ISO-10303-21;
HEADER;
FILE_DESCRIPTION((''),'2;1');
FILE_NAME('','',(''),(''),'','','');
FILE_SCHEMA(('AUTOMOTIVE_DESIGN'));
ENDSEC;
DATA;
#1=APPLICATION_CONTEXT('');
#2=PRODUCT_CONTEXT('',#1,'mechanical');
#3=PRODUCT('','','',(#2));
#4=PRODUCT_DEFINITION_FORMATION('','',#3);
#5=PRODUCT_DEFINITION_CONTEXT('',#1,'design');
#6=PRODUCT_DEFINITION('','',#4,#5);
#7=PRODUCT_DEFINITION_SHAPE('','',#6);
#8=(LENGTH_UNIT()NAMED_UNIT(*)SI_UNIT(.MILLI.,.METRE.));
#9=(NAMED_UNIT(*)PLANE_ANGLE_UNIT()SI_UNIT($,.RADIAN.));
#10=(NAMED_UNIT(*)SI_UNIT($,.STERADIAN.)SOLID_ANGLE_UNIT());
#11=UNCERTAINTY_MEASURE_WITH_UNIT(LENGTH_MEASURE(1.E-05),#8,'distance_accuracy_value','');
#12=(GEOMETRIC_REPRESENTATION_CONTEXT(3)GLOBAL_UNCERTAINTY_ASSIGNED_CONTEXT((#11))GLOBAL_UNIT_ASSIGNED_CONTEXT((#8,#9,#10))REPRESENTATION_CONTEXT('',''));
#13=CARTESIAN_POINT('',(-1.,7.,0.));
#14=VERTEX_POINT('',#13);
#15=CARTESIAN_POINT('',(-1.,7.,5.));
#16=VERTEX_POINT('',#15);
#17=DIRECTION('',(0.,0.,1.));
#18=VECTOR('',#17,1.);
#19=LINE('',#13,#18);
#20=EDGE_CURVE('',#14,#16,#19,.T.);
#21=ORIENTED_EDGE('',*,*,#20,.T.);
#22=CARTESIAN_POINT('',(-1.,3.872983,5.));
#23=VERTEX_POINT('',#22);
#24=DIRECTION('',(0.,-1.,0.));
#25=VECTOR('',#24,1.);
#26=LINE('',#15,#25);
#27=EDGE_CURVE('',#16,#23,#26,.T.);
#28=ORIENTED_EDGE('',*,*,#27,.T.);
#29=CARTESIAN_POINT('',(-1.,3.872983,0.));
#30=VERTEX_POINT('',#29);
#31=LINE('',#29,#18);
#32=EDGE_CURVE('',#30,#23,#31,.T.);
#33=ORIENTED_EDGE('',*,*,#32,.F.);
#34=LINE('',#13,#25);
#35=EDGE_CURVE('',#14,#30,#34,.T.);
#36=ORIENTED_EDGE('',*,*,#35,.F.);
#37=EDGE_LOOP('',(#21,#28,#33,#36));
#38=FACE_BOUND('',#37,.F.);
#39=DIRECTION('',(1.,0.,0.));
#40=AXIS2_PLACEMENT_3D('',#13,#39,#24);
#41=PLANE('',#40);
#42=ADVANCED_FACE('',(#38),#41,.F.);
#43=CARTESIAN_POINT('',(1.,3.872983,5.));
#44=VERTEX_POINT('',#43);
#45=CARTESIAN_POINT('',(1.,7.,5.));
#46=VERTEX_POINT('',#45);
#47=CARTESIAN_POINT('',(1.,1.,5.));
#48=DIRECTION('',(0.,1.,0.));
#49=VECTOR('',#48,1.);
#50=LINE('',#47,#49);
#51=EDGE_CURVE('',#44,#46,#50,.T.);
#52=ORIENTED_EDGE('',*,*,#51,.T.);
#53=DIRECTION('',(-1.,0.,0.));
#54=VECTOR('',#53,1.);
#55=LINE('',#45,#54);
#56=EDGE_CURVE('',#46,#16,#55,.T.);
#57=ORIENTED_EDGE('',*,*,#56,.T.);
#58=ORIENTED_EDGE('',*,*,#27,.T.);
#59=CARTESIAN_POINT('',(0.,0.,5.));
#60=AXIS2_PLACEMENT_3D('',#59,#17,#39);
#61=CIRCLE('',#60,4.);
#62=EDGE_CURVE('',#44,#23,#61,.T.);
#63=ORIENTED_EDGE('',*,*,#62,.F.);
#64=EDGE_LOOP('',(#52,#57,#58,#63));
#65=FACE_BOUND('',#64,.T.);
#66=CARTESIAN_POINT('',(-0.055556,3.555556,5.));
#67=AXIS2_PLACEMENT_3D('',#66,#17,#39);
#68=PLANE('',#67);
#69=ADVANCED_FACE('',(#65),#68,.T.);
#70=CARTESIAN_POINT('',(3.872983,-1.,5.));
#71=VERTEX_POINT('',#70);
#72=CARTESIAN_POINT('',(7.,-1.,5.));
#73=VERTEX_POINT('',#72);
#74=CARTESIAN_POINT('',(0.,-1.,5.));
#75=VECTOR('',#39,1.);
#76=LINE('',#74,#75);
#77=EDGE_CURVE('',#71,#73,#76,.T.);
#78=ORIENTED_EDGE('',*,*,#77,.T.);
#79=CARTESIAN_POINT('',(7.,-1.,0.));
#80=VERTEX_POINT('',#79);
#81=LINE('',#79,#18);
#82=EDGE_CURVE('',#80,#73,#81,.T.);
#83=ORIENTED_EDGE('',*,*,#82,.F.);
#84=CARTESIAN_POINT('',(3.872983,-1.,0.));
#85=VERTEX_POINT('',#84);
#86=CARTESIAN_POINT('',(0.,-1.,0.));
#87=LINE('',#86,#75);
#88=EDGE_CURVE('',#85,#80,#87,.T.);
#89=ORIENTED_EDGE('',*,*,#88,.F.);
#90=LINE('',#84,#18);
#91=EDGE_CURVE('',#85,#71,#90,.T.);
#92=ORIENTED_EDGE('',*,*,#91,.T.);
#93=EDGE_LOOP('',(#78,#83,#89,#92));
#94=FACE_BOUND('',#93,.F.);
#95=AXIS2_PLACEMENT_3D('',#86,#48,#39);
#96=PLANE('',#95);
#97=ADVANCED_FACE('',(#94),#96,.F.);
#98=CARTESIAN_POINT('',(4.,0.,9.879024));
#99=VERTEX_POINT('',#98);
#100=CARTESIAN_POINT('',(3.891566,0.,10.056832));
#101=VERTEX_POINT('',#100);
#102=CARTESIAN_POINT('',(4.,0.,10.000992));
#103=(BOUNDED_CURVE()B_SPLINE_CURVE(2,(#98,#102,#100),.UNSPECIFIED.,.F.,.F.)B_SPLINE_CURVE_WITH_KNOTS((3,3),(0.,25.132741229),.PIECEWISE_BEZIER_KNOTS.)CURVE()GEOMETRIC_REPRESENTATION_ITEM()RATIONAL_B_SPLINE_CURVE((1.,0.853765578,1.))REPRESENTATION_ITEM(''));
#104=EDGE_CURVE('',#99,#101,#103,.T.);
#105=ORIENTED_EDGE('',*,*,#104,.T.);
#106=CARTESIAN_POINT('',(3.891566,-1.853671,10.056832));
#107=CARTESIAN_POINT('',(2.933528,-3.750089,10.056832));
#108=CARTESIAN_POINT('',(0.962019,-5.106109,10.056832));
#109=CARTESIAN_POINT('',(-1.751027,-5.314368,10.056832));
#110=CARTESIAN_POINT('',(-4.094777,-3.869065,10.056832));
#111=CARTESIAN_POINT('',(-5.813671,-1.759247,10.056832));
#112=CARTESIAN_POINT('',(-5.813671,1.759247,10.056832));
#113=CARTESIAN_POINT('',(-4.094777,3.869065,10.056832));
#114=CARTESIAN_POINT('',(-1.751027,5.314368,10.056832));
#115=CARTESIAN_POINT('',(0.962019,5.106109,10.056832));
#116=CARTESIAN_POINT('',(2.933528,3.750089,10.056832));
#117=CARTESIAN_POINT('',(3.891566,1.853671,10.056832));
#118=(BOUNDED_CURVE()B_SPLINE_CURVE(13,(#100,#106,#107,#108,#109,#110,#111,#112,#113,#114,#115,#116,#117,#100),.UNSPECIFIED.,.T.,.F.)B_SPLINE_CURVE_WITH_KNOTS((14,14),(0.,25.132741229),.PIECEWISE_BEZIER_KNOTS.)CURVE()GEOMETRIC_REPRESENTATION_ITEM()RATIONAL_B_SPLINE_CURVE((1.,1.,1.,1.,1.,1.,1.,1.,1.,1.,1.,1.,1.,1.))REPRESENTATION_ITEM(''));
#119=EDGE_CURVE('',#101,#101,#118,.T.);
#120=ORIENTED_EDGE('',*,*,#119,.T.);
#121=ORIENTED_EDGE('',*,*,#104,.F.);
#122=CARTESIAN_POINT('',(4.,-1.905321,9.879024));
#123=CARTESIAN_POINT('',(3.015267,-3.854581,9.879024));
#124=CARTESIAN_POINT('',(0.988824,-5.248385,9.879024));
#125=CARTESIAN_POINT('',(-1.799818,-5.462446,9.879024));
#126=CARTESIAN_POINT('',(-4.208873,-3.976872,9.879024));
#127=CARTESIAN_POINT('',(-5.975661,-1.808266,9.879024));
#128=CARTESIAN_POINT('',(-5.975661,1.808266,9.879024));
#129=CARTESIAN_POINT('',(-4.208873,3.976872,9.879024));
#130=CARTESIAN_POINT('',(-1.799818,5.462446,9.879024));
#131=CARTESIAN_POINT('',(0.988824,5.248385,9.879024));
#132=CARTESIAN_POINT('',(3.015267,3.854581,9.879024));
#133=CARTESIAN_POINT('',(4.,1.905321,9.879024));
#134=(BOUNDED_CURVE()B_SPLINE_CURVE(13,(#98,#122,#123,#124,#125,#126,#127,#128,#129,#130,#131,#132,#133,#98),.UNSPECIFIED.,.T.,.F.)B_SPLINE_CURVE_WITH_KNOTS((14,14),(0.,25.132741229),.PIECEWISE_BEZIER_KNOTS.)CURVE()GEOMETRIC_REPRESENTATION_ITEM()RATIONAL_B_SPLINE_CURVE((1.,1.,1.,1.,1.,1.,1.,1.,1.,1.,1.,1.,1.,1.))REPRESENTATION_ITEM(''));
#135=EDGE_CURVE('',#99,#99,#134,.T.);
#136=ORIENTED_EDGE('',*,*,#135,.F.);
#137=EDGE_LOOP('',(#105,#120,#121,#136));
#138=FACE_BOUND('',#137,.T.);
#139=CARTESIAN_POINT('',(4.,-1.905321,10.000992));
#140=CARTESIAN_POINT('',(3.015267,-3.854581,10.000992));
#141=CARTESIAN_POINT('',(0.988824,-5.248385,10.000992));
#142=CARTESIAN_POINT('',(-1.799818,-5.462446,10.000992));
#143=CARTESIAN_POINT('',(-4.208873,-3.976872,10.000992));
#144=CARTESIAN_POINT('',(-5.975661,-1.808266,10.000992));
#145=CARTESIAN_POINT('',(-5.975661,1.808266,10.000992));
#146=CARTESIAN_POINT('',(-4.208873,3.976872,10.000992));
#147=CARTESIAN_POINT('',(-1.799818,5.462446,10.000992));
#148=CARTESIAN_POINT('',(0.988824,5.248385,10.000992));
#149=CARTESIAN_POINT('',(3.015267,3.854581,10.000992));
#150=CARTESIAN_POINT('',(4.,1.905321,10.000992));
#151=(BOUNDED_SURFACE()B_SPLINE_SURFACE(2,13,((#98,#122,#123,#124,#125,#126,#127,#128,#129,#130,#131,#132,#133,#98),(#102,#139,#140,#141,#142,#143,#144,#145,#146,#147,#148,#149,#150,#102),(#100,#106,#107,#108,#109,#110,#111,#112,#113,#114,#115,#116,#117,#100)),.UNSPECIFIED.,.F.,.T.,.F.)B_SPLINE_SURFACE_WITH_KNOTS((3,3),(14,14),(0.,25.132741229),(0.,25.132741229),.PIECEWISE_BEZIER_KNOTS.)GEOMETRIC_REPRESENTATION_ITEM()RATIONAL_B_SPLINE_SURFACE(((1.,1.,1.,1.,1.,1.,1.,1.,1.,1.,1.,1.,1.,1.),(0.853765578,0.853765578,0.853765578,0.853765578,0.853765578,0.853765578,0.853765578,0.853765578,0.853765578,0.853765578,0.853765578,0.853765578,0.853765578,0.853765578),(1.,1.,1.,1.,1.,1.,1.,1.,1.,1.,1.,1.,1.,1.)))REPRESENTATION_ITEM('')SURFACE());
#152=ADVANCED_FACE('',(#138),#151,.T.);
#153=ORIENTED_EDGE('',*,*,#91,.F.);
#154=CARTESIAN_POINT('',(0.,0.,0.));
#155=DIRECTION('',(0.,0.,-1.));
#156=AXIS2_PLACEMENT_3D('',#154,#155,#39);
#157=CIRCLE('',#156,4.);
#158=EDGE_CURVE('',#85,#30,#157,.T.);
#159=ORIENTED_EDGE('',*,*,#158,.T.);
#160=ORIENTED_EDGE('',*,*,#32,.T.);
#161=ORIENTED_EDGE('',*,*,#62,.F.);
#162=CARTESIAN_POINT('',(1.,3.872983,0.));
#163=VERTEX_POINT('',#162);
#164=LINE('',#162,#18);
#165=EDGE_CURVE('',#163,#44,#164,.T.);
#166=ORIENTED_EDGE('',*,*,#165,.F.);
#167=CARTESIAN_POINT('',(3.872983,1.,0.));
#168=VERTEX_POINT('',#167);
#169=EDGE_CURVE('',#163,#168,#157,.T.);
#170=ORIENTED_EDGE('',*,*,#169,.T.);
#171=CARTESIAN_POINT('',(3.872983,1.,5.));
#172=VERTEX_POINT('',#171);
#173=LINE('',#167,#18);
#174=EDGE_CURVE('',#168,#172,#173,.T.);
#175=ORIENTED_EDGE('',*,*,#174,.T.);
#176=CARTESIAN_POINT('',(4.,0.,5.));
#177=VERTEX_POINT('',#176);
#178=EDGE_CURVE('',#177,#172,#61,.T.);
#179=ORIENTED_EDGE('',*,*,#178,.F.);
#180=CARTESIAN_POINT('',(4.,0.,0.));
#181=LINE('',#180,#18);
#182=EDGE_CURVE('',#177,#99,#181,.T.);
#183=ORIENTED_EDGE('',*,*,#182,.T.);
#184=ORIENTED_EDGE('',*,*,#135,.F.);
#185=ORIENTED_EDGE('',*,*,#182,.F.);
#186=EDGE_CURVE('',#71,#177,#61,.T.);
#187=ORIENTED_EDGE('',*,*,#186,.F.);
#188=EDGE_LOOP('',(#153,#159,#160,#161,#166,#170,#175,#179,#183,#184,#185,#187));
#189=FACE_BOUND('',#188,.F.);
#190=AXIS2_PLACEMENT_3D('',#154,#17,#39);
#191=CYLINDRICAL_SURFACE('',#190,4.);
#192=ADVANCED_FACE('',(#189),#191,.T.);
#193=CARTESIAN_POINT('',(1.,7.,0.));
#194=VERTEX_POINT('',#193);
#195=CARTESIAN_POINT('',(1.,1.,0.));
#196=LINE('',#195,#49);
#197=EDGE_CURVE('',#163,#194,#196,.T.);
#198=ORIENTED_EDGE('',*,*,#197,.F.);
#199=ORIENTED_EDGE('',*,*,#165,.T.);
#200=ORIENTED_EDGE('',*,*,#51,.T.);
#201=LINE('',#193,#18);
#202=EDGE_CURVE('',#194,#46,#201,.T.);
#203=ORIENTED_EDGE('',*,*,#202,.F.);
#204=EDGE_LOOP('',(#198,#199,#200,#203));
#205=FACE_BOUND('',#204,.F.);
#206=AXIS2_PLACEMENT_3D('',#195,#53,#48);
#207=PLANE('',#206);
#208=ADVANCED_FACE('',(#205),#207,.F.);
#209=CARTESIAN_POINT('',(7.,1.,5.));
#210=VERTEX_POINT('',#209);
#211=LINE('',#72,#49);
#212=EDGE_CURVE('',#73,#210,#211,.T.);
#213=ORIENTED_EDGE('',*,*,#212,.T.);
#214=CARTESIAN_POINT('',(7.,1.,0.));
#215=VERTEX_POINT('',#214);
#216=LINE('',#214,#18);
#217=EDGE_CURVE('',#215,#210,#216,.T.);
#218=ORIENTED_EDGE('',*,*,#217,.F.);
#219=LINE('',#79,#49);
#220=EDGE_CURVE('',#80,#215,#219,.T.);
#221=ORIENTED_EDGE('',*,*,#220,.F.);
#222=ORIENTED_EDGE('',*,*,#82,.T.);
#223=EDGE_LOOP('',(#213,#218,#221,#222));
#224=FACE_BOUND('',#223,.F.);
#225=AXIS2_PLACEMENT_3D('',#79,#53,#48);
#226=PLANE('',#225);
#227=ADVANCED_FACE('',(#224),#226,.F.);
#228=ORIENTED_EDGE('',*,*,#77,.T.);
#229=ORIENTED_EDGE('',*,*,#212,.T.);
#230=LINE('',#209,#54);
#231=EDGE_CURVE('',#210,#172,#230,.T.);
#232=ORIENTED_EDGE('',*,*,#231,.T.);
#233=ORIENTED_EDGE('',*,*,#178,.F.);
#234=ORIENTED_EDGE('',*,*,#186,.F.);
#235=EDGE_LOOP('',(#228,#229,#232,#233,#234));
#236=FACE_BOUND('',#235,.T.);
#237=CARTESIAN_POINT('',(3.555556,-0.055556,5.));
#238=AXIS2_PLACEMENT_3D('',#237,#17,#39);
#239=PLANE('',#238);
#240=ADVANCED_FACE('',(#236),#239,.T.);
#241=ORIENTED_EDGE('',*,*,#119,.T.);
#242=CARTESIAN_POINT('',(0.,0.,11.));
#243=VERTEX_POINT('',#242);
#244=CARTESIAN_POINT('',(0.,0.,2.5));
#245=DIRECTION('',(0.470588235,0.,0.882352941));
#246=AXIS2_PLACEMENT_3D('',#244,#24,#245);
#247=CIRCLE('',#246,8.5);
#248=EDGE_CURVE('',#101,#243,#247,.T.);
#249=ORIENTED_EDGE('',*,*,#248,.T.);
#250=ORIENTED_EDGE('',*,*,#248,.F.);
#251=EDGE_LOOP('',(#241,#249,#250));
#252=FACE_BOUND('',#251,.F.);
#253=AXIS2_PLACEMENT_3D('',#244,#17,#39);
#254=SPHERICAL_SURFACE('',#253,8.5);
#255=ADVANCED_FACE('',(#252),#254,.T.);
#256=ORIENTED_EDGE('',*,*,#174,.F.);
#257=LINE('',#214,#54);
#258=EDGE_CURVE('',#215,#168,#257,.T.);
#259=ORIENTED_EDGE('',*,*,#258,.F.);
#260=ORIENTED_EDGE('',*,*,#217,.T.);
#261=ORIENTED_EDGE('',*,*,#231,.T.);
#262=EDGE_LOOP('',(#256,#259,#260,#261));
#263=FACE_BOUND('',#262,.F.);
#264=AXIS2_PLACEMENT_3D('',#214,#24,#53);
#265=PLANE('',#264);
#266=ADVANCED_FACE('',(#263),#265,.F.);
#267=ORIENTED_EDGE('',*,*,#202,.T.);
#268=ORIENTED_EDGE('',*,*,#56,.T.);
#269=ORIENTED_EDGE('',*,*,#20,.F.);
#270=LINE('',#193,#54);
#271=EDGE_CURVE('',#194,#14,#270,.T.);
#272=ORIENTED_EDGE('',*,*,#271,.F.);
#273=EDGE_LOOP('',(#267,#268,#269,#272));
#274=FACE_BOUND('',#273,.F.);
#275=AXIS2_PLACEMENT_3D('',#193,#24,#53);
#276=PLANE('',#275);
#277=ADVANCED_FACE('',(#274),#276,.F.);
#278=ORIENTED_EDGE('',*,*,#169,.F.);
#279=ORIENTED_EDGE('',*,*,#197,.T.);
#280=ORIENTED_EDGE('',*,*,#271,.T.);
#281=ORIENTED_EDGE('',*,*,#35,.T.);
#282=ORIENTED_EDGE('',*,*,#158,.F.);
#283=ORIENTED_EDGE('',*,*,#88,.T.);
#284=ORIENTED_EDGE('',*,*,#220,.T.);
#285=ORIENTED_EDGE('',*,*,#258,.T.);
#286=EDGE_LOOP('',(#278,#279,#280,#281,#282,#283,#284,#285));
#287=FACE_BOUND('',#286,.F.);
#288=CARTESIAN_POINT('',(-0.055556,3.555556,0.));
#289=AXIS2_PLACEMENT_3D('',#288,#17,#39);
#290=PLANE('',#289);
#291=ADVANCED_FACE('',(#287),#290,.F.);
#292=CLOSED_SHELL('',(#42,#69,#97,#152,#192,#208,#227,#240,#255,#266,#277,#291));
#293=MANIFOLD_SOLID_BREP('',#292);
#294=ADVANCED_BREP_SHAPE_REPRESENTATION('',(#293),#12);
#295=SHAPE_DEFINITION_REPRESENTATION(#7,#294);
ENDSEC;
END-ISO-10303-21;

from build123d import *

# Parameters (mm, degrees)
F2_R     = 0.2
F4_DEPTH = 5


with BuildPart() as f1:
    # F0 (on Front) → F1 (revolve)
    with BuildSketch(Plane.XZ):
        with BuildLine():
            Line((0, 9.25), (0, 0))
            Line((0, 0), (4, 0))
            Line((4, 0), (4, 10))
            Line((4, 10), (3.75, 10))
            ThreePointArc((3.75, 10), (1.9121323176, 9.439338412), (0, 9.25))
        make_face()
        with BuildLine():
            Line((0, 10), (0, 9.25))
            ThreePointArc((0, 9.25), (1.9121323176, 9.439338412), (3.75, 10))
            Line((3.75, 10), (0, 10))
        make_face()
        with BuildLine():
            Line((3.75, 10), (4, 10))
            ThreePointArc((4, 10), (2.0615528128, 10.7462112512), (0, 11))
            Line((0, 11), (0, 10))
            Line((0, 10), (3.75, 10))
        make_face()
    revolve(axis=Axis((0, 0, 5), (0, 0, -1)))

    # F2
    f2_edges = [f1.edges().sort_by_distance(p)[0] for p in [
        (-4, 0, 10),
    ]]
    fillet(f2_edges, radius=F2_R)

    # F3 (on Top) → F4 (join)
    with BuildSketch(Plane.XY):
        Polygon((-1, 7), (-1, 0), (0, 0), (0, 1), (1, 1), (1, 7), align=None)
        Polygon((1, 0), (0, 0), (0, -1), (7, -1), (7, 1), (1, 1), align=None)
    extrude(amount=F4_DEPTH)


solid = f1.part
